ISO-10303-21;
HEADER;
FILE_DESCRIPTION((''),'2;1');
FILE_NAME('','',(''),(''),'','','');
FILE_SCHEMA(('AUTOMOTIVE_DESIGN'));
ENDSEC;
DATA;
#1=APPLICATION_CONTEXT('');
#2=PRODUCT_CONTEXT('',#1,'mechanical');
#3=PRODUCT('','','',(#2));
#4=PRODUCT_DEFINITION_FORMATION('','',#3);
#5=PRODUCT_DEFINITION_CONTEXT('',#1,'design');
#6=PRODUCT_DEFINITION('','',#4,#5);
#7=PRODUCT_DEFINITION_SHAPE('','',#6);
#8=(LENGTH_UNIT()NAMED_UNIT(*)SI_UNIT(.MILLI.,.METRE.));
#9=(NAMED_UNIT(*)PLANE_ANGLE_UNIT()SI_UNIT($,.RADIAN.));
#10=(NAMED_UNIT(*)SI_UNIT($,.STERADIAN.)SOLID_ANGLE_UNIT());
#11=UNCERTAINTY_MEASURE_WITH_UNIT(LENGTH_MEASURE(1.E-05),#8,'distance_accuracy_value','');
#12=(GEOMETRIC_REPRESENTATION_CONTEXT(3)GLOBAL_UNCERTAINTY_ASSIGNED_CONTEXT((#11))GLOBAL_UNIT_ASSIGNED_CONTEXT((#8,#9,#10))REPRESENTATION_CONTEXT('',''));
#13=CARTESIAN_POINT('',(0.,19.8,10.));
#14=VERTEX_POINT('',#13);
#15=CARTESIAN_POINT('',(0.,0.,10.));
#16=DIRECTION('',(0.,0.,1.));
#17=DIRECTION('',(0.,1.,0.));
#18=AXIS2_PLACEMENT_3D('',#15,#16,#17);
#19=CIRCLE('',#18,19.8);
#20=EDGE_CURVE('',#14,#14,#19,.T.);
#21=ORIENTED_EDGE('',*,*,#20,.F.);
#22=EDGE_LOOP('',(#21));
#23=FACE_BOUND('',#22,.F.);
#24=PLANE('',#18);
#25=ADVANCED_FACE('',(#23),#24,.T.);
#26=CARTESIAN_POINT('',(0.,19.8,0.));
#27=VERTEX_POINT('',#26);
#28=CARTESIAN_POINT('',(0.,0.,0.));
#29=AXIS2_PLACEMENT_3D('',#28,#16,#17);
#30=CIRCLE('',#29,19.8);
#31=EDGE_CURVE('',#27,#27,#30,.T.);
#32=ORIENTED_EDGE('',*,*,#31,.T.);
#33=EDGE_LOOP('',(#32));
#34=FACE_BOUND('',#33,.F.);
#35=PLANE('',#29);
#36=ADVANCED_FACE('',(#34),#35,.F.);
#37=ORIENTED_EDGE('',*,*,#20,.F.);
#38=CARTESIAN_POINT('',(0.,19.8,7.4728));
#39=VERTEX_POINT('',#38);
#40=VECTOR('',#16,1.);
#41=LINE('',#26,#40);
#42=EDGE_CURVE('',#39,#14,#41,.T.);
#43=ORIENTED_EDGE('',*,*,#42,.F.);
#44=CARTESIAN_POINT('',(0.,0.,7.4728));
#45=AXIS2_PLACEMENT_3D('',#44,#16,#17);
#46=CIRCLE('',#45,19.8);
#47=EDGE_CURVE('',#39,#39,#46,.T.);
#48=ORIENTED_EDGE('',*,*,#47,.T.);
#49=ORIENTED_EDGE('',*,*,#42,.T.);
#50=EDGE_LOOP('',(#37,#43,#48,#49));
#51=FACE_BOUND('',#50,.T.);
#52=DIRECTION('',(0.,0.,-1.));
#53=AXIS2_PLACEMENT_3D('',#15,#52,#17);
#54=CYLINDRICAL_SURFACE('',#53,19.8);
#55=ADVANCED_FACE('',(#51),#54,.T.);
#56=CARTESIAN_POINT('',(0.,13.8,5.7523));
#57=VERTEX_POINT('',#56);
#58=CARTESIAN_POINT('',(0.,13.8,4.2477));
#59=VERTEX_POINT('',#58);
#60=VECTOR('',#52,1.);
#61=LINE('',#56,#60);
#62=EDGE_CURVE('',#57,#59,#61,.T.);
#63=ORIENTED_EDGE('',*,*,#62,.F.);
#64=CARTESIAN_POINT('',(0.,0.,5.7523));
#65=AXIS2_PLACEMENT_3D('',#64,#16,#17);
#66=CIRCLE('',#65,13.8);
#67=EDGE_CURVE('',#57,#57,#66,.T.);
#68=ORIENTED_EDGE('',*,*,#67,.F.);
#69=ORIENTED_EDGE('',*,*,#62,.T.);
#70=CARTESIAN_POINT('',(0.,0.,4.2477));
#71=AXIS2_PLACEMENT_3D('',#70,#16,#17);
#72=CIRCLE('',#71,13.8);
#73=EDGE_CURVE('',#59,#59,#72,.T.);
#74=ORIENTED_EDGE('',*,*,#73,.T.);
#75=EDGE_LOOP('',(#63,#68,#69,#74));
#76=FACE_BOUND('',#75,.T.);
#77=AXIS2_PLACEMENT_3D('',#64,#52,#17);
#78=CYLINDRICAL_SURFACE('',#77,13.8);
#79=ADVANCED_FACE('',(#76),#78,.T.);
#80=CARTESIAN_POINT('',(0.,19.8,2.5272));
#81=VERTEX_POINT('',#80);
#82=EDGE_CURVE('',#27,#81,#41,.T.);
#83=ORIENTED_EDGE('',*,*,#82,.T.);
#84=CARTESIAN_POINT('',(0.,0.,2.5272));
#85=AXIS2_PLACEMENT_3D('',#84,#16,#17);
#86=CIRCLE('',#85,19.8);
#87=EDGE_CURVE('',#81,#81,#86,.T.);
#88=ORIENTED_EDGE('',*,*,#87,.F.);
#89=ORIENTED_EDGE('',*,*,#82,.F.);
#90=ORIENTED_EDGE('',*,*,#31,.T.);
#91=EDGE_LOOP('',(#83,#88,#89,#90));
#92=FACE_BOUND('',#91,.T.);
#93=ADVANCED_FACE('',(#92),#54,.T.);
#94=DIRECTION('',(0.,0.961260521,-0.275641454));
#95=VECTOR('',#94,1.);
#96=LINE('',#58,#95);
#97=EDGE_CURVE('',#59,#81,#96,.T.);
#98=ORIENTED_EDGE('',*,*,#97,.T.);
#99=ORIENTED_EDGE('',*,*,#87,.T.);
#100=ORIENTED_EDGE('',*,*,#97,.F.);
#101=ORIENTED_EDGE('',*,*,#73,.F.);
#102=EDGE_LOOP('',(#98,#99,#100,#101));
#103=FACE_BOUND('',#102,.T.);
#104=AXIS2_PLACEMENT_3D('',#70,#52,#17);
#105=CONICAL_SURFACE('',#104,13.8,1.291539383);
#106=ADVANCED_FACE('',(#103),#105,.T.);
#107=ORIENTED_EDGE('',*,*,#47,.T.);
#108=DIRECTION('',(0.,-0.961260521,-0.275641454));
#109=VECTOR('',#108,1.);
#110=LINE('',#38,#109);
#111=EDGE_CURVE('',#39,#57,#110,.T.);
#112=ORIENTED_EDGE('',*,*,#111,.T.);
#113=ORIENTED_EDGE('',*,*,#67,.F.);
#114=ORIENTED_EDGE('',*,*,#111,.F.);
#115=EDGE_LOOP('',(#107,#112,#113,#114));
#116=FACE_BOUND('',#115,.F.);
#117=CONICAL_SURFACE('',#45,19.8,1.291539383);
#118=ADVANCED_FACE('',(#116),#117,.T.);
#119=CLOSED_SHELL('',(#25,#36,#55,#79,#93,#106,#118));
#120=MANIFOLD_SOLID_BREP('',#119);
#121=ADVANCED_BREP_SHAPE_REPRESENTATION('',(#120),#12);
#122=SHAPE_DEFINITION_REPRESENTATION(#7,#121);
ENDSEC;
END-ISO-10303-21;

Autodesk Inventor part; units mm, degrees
ref_plane "YZ Plane" through (0, 0, 0) normal (1, 0, 0) x (0, 1, 0)
ref_plane "XZ Plane" through (0, 0, 0) normal (0, 1, 0) x (-1, 0, 0)
sketch "Основной эскиз" plane through (0, 0, 0) normal (1, 0, 0) x (0, 1, 0)
  line L0 (0, 10) -> (19.8, 10)
  line L1 (19.8, 10) -> (19.8, 7.4728)
  line L2 (19.8, 7.4728) -> (13.8, 5.7523)
  line L3 (13.8, 5.7523) -> (13.8, 4.2477)
  line L4 (13.8, 4.2477) -> (19.8, 2.5272)
  line L5 (19.8, 2.5272) -> (19.8, 0)
  line L6 (19.8, 0) -> (0, 0)
  line L7 (18.5, 7.1) -> (18.5, 2.9) construction
  line L8 (13.8, 5) -> (18.5, 5) construction
  line L9 (19.8, 7.4728) -> (19.8, 2.5272)
  line L10 (0, -2) -> (0, 12) projected
  line L11 (0, 0) -> (0, 10)
  dimension "d0" = 4.2
  dimension "d1" = 32
  dimension "d2" = 1.3
  dimension "d6" = 10
  dimension "d21" = 37
  dimension "d25" = 6
  dimension "d27" = 5
ref_plane "Плоскость ремня" through (0, 13.8, 5) normal (0, 0, 1) x (1, 0, 0)
revolve "Тело" add sketch "Основной эскиз" angle 360 about axis through (0, 0, -10) along (0, 0, 1)
revolve "Канавка" cut sketch "Основной эскиз" angle 360 about axis through (0, 0, -10) along (0, 0, 1) contours L9 L4 L3 L2
fillet "Сопряжение снаружи" [suppressed]
fillet "Сопряжение изнутри" [suppressed]
pattern_of_one "Образец канавки"
equation "\"d0\" = da_Bw"
equation "\"d1\" = da_Alfa"
equation "\"d2\" = da_c"
equation "\"d21\" = da_Dw"
equation "\"d25\" = da_Hd"
equation "\"d27\" = da_Se"
equation "\"da_r1\" = 0"
equation "\"da_r2\" = 0"
equation "\"d18\" = da_Sg"
equation "\"d5\" = da_Se"
equation "\"da_Bw\" = 4.2"
equation "\"da_Alfa\" = 32deg"
equation "\"da_c\" = 1.3"
equation "\"da_Dw\" = 37"
equation "\"da_Hd\" = 6"
equation "\"da_Se\" = 5"
equation "\"da_Sg\" = 6"
properties part number "Шкив желобчатый2" material "Steel"
